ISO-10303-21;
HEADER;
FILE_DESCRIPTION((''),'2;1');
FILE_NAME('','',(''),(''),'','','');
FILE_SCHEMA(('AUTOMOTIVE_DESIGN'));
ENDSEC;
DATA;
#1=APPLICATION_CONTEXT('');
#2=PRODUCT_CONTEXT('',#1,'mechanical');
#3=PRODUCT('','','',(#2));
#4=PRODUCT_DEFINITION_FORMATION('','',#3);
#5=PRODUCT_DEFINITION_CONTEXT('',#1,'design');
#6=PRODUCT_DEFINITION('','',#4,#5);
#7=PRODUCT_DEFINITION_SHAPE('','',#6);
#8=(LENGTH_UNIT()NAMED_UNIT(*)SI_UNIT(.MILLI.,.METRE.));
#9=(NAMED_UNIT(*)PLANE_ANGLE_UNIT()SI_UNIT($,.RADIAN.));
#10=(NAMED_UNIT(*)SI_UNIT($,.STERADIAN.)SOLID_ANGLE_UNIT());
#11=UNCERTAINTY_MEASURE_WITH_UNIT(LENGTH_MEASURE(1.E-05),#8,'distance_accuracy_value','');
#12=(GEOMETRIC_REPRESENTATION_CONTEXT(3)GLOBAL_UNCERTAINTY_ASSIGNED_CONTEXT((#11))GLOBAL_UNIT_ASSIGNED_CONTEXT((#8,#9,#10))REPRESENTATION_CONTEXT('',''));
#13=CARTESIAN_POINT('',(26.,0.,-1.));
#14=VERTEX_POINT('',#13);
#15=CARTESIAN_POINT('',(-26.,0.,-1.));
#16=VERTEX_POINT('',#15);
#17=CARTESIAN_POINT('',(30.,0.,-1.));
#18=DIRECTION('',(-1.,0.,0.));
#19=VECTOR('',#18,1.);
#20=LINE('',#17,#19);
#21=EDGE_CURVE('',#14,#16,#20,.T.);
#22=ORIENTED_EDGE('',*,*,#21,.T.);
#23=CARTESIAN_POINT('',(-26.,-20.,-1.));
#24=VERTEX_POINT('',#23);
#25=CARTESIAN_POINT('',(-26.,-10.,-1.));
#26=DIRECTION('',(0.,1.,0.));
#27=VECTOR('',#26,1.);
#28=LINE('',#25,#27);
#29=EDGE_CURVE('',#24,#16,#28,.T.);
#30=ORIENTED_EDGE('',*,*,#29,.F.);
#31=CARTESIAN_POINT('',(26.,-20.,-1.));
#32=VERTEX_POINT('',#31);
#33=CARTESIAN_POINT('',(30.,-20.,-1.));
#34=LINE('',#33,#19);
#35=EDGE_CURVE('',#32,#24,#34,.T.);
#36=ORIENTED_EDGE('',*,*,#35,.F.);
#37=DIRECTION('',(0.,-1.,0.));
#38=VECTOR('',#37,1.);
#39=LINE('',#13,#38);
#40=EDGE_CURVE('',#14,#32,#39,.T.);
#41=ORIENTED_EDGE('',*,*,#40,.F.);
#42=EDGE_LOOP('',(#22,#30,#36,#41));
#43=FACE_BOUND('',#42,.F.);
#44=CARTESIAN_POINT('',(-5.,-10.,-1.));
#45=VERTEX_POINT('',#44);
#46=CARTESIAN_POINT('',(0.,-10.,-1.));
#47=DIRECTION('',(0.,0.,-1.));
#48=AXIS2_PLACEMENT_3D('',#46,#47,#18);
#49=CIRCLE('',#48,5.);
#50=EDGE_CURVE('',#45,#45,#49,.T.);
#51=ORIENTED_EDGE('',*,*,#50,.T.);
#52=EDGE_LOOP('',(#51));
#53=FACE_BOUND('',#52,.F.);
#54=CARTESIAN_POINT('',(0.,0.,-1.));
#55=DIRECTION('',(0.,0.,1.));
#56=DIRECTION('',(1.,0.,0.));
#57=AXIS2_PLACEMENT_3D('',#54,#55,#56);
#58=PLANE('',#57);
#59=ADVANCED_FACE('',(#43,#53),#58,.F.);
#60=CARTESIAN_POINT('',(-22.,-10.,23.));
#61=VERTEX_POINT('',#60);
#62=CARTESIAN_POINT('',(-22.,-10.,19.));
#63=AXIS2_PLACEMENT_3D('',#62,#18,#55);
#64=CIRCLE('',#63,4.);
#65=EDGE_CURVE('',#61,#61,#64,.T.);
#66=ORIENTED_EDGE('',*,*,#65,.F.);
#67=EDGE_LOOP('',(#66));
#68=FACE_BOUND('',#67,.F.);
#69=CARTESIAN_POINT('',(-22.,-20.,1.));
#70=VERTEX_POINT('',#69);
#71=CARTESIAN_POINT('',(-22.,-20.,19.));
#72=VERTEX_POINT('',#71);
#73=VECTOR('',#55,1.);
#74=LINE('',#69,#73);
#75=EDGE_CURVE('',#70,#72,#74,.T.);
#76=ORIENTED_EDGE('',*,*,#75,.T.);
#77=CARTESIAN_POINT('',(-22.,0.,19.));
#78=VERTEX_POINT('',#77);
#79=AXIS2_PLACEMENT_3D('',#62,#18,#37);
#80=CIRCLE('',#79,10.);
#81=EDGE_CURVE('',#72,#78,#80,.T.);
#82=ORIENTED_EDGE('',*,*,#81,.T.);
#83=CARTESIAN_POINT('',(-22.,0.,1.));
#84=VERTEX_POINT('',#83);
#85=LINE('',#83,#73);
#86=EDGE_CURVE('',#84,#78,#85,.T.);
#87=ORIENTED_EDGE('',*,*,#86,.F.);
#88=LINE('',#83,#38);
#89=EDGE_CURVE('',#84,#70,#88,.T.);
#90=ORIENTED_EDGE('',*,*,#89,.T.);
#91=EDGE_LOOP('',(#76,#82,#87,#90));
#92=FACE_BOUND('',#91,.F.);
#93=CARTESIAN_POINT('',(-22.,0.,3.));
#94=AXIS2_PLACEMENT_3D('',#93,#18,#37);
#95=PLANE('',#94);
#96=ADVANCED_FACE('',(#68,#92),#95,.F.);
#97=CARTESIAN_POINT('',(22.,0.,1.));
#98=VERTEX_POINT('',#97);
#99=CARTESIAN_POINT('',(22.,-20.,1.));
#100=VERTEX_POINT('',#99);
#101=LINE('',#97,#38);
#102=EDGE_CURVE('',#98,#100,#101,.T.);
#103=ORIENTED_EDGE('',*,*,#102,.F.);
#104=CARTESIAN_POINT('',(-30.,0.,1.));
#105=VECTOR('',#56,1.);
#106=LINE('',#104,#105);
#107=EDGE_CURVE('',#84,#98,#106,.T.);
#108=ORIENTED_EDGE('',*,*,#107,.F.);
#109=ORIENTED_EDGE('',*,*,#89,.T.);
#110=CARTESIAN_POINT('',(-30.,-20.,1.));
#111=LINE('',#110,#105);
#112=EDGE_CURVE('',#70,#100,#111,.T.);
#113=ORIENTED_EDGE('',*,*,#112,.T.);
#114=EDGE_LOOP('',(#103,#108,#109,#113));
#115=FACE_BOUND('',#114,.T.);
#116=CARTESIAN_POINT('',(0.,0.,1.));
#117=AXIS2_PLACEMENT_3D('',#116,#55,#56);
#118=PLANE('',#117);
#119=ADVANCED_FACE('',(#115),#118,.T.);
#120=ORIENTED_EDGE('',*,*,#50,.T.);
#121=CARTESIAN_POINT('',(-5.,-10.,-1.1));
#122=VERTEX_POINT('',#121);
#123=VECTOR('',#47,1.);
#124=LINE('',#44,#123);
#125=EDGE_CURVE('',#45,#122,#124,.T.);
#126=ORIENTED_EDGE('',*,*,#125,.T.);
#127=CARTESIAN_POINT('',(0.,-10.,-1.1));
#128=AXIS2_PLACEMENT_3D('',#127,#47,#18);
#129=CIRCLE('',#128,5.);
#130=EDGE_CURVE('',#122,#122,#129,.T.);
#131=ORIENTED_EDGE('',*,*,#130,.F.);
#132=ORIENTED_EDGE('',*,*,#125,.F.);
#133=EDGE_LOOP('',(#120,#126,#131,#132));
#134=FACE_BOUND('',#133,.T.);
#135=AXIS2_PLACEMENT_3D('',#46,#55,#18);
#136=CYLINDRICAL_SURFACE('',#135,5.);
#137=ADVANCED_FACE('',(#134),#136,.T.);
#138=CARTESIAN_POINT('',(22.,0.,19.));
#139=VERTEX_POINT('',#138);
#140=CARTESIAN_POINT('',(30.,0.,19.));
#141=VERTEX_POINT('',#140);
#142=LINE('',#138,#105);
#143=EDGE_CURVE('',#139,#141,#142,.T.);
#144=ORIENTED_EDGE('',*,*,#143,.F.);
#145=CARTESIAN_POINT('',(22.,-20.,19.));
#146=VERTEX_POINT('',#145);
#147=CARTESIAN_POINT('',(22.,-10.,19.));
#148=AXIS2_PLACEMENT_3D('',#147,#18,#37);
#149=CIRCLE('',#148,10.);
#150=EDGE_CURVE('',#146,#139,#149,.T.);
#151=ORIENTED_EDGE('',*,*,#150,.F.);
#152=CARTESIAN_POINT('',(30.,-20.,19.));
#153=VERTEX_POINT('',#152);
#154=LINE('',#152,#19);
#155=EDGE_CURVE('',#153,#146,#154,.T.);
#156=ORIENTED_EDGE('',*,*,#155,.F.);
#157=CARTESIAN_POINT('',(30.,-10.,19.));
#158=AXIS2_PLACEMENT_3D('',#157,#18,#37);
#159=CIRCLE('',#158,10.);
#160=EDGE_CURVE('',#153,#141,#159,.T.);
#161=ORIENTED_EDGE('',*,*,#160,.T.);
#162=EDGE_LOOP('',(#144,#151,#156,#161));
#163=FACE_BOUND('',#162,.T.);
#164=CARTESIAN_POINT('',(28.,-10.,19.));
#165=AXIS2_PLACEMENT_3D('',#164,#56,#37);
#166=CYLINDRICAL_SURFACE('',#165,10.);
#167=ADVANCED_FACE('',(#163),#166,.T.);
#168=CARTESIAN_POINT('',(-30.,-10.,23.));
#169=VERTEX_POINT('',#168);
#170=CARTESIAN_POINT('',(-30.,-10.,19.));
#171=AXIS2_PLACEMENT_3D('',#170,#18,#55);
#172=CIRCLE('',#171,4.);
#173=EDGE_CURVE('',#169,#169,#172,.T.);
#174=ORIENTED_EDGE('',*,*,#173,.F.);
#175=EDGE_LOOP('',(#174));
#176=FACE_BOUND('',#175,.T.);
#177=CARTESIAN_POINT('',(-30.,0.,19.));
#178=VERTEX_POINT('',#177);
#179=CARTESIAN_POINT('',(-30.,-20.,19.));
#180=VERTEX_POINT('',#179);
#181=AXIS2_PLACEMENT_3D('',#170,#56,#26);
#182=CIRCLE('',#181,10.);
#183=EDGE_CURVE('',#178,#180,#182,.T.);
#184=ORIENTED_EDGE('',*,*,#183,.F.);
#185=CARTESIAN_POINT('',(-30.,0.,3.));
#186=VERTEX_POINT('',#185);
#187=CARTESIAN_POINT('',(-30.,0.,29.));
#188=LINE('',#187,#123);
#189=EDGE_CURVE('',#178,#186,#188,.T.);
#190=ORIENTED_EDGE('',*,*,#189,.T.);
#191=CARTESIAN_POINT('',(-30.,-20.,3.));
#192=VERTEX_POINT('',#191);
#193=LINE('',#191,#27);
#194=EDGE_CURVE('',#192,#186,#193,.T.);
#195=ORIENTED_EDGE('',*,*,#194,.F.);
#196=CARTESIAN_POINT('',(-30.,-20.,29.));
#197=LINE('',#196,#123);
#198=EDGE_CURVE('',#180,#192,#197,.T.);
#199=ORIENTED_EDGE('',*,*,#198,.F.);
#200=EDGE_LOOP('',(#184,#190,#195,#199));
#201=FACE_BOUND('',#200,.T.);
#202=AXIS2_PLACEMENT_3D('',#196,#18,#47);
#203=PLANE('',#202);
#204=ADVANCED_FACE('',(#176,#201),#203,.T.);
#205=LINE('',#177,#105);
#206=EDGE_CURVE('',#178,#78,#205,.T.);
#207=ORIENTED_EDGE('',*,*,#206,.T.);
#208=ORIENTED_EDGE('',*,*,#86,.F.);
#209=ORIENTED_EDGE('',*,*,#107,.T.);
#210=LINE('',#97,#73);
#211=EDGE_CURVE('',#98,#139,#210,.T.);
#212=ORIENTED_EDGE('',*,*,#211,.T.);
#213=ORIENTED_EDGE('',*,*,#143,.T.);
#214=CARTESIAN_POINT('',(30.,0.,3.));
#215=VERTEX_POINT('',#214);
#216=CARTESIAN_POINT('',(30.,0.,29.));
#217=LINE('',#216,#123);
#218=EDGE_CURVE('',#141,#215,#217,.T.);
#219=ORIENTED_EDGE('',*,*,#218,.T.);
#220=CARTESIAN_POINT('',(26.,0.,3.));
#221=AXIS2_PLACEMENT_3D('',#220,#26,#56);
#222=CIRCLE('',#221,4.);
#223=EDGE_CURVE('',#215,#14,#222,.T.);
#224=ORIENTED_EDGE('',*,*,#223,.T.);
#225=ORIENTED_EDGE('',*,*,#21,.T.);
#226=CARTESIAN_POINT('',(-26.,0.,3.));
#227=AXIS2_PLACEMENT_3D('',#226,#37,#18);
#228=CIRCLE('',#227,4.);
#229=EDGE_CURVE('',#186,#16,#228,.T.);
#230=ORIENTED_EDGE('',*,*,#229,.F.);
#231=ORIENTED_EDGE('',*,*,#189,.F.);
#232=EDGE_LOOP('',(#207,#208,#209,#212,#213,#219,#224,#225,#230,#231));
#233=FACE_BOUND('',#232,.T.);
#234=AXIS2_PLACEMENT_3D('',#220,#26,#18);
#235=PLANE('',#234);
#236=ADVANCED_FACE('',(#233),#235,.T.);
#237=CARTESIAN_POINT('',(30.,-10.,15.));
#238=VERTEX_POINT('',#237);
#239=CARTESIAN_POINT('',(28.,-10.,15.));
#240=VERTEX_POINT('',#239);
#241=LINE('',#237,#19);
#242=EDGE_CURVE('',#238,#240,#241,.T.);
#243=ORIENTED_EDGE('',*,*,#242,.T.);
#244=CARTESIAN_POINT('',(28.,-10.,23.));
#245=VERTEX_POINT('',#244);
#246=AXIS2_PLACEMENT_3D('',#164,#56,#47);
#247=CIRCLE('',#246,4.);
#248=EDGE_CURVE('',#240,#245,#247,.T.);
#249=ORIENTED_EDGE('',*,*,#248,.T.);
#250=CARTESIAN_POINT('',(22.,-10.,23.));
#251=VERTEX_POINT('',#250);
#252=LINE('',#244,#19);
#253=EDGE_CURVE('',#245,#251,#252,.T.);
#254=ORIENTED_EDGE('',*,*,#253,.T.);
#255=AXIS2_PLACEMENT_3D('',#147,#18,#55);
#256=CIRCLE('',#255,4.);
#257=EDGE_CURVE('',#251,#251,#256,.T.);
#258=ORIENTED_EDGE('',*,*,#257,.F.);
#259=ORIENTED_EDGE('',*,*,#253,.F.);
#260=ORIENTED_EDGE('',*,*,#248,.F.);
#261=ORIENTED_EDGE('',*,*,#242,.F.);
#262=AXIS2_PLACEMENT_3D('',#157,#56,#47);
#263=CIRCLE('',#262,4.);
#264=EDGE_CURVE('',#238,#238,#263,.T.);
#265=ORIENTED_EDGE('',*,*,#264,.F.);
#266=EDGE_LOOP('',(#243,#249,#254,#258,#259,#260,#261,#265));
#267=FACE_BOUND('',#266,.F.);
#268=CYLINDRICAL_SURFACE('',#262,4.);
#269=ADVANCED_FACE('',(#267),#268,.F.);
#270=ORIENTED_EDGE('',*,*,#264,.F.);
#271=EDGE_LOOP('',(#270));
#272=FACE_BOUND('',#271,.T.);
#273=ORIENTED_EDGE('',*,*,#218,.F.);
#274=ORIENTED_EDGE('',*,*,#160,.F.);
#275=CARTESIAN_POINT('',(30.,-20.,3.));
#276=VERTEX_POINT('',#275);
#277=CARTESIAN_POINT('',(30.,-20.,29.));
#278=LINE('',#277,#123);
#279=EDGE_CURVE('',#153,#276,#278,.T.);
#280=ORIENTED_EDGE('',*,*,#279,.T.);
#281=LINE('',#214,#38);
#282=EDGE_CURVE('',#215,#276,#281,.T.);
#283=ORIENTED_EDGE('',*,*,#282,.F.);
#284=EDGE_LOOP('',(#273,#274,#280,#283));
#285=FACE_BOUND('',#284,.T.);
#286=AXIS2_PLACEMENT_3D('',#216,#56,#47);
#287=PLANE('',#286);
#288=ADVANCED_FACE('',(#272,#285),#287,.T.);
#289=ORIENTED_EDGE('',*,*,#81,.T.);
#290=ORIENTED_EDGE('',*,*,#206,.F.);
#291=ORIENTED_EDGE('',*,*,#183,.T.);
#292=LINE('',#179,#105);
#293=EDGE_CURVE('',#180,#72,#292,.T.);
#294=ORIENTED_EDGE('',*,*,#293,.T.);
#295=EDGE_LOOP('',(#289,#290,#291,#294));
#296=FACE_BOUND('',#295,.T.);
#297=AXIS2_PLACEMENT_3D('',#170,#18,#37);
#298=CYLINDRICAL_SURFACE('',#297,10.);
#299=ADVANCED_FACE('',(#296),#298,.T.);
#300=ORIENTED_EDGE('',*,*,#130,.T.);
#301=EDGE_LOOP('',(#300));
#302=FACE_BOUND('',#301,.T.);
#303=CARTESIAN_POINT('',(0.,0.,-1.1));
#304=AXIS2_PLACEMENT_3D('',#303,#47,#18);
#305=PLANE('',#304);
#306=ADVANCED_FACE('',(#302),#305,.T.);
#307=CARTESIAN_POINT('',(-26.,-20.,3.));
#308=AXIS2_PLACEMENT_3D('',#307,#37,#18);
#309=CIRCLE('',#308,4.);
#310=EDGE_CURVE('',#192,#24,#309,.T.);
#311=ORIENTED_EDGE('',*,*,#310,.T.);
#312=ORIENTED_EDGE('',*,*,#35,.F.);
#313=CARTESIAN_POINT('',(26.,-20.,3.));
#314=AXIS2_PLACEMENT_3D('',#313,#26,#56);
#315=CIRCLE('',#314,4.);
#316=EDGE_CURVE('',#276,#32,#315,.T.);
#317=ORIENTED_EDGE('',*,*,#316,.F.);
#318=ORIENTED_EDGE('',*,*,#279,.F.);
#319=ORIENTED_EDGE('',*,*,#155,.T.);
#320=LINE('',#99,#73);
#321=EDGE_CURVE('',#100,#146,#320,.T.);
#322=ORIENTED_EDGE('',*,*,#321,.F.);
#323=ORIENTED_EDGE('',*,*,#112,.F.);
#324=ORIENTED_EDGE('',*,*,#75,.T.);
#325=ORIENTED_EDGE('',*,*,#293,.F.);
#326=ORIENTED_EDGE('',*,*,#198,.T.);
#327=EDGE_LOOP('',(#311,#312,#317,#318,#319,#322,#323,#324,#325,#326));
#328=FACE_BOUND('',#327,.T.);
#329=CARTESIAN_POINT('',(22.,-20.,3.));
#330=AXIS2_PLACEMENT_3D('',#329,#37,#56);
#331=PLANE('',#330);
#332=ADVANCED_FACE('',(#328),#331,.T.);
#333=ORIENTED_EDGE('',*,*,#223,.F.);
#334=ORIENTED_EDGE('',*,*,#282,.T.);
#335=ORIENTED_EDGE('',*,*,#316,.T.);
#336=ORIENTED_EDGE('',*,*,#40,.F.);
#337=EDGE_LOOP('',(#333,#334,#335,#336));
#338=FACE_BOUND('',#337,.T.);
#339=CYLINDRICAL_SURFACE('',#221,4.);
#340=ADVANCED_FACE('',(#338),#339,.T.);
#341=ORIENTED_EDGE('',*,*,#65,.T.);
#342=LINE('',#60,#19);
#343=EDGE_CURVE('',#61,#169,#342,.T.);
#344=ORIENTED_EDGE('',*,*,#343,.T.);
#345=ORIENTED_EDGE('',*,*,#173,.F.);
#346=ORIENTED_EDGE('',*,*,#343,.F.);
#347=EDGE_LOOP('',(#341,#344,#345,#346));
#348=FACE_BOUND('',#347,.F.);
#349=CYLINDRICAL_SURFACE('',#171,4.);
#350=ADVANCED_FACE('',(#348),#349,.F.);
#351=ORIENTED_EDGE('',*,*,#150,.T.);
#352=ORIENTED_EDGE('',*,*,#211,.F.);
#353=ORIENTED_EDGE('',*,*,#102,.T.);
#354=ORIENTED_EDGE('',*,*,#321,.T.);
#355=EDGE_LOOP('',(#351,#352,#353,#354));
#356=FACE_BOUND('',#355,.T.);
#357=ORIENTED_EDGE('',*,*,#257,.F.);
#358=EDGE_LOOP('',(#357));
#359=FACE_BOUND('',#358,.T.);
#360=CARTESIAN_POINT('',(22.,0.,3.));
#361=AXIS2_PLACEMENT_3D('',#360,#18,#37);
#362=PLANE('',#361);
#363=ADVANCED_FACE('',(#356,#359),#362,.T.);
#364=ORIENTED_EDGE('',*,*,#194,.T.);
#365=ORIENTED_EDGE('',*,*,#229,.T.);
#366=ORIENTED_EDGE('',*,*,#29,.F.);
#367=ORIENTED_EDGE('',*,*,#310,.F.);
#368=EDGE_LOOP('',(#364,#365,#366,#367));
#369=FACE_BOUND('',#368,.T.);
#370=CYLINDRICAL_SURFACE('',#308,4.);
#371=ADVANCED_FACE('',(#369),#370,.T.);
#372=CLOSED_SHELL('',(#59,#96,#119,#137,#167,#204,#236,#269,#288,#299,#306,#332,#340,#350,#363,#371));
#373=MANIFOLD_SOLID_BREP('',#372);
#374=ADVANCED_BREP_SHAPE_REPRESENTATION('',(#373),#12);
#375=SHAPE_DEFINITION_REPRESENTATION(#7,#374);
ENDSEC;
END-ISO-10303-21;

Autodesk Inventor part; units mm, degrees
ref_plane "YZ Plane" through (0, 0, 0) normal (1, 0, 0) x (0, 1, 0)
ref_plane "XZ Plane" through (0, 0, 0) normal (0, 1, 0) x (-1, 0, 0)
ref_plane "XY Plane" through (0, 0, 0) normal (0, 0, 1) x (1, 0, 0)
sketch "Sketch1" plane through (0, 0, 0) normal (0, 0, 1) x (1, 0, 0)
  line L0 (0, 0) -> (30, 0)
  line L1 (30, -20) -> (0, -20)
  line L2 (0, 0) -> (0, -20)
  line L3 (0, 0) -> (-30, 0)
  line L4 (-30, -20) -> (0, -20)
  line L5 (30, 0) -> (30, -20)
  line L6 (-30, 0) -> (-30, -20)
  dimension "d0" = 30
  dimension "d6" = 20
extrude "Extrusion1" add sketch "Sketch1" along normal mid plane 2
sketch "Sketch2" plane through (-28, -20, -1) normal (-1, 0, 0) x (0, -1, 0)
  line L0 (-20, 0) -> (0, 0)
  line L1 (0, 0) -> (0, 30)
  line L2 (0, 30) -> (-20, 30)
  line L3 (-20, 30) -> (-20, 0)
edge flange "Flange1" height 30 angle 90 thickness 2 bend radius 2 thickness toward (-1, 0, 0) relief tear relief width 2 relief depth 1 edges at (-30, -10, 1) wall of the first edge with corners at (-28, 0, -1) (-28, -20, -1) (-28, -20, 29) (-28, 0, 29)
bend "Bend1"
corner "Corner1"
sketch "Sketch3" plane through (28, 0, -1) normal (1, 0, 0) x (0, 1, 0)
  line L0 (-20, 0) -> (0, 0)
  line L1 (0, 0) -> (0, 30)
  line L2 (0, 30) -> (-20, 30)
  line L3 (-20, 30) -> (-20, 0)
edge flange "Flange2" height 30 angle 90 thickness 2 bend radius 2 thickness toward (1, 0, 0) relief tear relief width 2 relief depth 1 edges at (30, -10, 1) wall of the first edge with corners at (28, -20, -1) (28, 0, -1) (28, 0, 29) (28, -20, 29)
bend "Bend2"
corner "Corner2"
sketch "Sketch5" plane through (30, -20, 29) normal (1, 0, 0) x (0, 0, -1)
  line L0 (26, 0) -> (0, 0) projected
  line L1 (0, 0) -> (0, 20) projected
  line L2 (0, 20) -> (0, 0) projected
  line L3 (0, 0) -> (0, 20)
  line L4 (0, 20) -> (10, 20)
  line L5 (0, 0) -> (10, 0)
  line L6 (0, 0) -> (26, 0) projected
  arc A0 (10, 20) -> (10, 0) centre (10, 10) ccw
  line L7 (0, 20) -> (26, 20) projected
  circle A1 centre (10, 10) radius 4
  point P0 (29, 20)
  point P1 (0, 10)
  dimension "d38" = 10
  dimension "d39" = 10
  dimension "d40" = 10
  dimension "d46" = 8
extrude "Cut1" cut sketch "Sketch5" against normal blind 2
sketch "Sketch6" plane through (-30, -20, 29) normal (-1, 0, 0) x (0, 0, 1)
  line L0 (0, 20) -> (0, 0) projected
  line L1 (-10, 0) -> (0, 0)
  line L2 (0, 0) -> (0, 20)
  line L3 (0, 20) -> (-10, 20)
  line L4 (-26, 20) -> (0, 20) projected
  arc A0 (-10, 0) -> (-10, 20) centre (-10, 10) ccw
  circle A1 centre (-10, 10) radius 4
  point P0 (-29, 20)
  point P1 (0, 10)
  dimension "d43" = 10
  dimension "d47" = 8
extrude "Cut2" cut sketch "Sketch6" against normal blind 2
sketch "Sketch8" plane through (-30, -20, 3) normal (-1, 0, 0) x (0, 0, 1)
  line L0 (16, 0) -> (0, 0) projected
  arc A0 (16, 0) -> (16, 20) centre (16, 10) ccw projected
  line L1 (0, 20) -> (16, 20) projected
  line L2 (0, 20) -> (0, 0) projected
  line L3 (16, 0) -> (0, 0) projected
  arc A1 (16, 0) -> (16, 20) centre (16, 10) ccw projected
  line L4 (0, 0) -> (16, 0)
  arc A2 (16, 0) -> (16, 20) centre (16, 10) ccw
  line L5 (16, 20) -> (0, 20) projected
  line L6 (16, 20) -> (0, 20)
  line L7 (0, 20) -> (0, 0) projected
  line L8 (0, 20) -> (0, 0)
  circle A3 centre (16, 10) radius 4
  point P0 (-3, 20)
extrude "Extrusion3" add sketch "Sketch8" against normal blind 8
sketch "Sketch9" plane through (28, -20, 3) normal (-1, 0, 0) x (0, 0, 1)
  line L0 (0, 0) -> (16, 0) projected
  line L1 (0, 0) -> (16, 0)
  line L2 (16, 0) -> (0, 0) projected
  arc A0 (16, 0) -> (16, 20) centre (16, 10) ccw
  arc A1 (16, 0) -> (16, 20) centre (16, 10) ccw projected
  line L3 (0, 0) -> (0, 20) projected
  line L4 (16, 20) -> (0, 20)
  line L5 (0, 20) -> (0, 0)
  circle A2 centre (16, 10) radius 4 projected
  circle A3 centre (16, 10) radius 4
  point P0 (-3, 20)
extrude "Extrusion4" add sketch "Sketch9" along normal blind 6
sketch "Sketch11" plane through (-22, 0, 3) normal (0, 0, -1) x (-1, 0, 0)
  line L0 (6, 0) -> (0, 0) projected
  line L1 (0, 0) -> (6, 0)
  line L2 (6, -20) -> (6, 0) projected
  line L3 (6, 0) -> (6, -20)
  line L4 (6, -20) -> (0, -20) projected
  line L5 (6, -20) -> (0, -20)
  line L6 (0, 0) -> (0, -20) projected
  line L7 (0, -20) -> (0, 0)
  point P0 (-22, 0)
extrude "Extrusion5" add sketch "Sketch11" along normal blind 3
sketch "Sketch12" plane through (28, -20, 3) normal (0, 0, -1) x (-1, 0, 0)
  line L0 (2, 20) -> (0, 20) projected
  line L1 (6, 20) -> (6, 0) projected
  line L2 (0, 20) -> (6, 20)
  line L3 (6, 20) -> (6, 0)
  line L4 (2, 0) -> (0, 0) projected
  line L5 (6, 0) -> (0, 0)
  line L6 (0, 20) -> (0, 0) projected
  line L7 (0, 0) -> (0, 20)
  point P0 (28, 20)
extrude "Extrusion6" add sketch "Sketch12" along normal blind 3
sketch "Sketch13" plane through (0, 0, -1) normal (0, 0, -1) x (-1, 0, 0)
  circle A0 centre (0, -10) radius 5
  line L0 (26, -20) -> (26, 0) projected
  point P0 (0, 0)
  dimension "d62" = 10
  dimension "d63" = 10
  dimension "d64" = 26
extrude "Extrusion7" add sketch "Sketch13" along normal blind 0.1
equation "\"d41\" = Thickness"
equation "\"d44\" = Thickness"
equation "\"d7\" = Thickness"
equation "\"d8\" = BendReliefWidth"
equation "\"d9\" = BendReliefDepth"
equation "\"d10\" = MinimumRemnant"
equation "\"d11\" = TransitionRadius"
equation "\"d14\" = BendRadius"
equation "\"d15\" = CornerReliefSize"
equation "\"d16\" = GapSize"
equation "\"d17\" = JacobiRadiusSize"
equation "\"d18\" = BendReliefWidth"
equation "\"d19\" = BendReliefDepth"
equation "\"d20\" = MinimumRemnant"
equation "\"d21\" = TransitionRadius"
equation "\"d24\" = BendRadius"
equation "\"d25\" = CornerReliefSize"
equation "\"d26\" = GapSize"
equation "\"d27\" = JacobiRadiusSize"
equation "\"BendRadius\" = Thickness"
equation "\"BendReliefWidth\" = Thickness"
equation "\"BendReliefDepth\" = 0.5 * Thickness"
equation "\"CornerReliefSize\" = 4 * Thickness"
equation "\"MinimumRemnant\" = 2 * Thickness"
equation "\"TransitionRadius\" = BendRadius"
equation "\"JacobiRadiusSize\" = BendRadius"
equation "\"GapSize\" = Thickness"
equation "\"Thickness\" = 2"
properties part number "SHEET_METAL1"
